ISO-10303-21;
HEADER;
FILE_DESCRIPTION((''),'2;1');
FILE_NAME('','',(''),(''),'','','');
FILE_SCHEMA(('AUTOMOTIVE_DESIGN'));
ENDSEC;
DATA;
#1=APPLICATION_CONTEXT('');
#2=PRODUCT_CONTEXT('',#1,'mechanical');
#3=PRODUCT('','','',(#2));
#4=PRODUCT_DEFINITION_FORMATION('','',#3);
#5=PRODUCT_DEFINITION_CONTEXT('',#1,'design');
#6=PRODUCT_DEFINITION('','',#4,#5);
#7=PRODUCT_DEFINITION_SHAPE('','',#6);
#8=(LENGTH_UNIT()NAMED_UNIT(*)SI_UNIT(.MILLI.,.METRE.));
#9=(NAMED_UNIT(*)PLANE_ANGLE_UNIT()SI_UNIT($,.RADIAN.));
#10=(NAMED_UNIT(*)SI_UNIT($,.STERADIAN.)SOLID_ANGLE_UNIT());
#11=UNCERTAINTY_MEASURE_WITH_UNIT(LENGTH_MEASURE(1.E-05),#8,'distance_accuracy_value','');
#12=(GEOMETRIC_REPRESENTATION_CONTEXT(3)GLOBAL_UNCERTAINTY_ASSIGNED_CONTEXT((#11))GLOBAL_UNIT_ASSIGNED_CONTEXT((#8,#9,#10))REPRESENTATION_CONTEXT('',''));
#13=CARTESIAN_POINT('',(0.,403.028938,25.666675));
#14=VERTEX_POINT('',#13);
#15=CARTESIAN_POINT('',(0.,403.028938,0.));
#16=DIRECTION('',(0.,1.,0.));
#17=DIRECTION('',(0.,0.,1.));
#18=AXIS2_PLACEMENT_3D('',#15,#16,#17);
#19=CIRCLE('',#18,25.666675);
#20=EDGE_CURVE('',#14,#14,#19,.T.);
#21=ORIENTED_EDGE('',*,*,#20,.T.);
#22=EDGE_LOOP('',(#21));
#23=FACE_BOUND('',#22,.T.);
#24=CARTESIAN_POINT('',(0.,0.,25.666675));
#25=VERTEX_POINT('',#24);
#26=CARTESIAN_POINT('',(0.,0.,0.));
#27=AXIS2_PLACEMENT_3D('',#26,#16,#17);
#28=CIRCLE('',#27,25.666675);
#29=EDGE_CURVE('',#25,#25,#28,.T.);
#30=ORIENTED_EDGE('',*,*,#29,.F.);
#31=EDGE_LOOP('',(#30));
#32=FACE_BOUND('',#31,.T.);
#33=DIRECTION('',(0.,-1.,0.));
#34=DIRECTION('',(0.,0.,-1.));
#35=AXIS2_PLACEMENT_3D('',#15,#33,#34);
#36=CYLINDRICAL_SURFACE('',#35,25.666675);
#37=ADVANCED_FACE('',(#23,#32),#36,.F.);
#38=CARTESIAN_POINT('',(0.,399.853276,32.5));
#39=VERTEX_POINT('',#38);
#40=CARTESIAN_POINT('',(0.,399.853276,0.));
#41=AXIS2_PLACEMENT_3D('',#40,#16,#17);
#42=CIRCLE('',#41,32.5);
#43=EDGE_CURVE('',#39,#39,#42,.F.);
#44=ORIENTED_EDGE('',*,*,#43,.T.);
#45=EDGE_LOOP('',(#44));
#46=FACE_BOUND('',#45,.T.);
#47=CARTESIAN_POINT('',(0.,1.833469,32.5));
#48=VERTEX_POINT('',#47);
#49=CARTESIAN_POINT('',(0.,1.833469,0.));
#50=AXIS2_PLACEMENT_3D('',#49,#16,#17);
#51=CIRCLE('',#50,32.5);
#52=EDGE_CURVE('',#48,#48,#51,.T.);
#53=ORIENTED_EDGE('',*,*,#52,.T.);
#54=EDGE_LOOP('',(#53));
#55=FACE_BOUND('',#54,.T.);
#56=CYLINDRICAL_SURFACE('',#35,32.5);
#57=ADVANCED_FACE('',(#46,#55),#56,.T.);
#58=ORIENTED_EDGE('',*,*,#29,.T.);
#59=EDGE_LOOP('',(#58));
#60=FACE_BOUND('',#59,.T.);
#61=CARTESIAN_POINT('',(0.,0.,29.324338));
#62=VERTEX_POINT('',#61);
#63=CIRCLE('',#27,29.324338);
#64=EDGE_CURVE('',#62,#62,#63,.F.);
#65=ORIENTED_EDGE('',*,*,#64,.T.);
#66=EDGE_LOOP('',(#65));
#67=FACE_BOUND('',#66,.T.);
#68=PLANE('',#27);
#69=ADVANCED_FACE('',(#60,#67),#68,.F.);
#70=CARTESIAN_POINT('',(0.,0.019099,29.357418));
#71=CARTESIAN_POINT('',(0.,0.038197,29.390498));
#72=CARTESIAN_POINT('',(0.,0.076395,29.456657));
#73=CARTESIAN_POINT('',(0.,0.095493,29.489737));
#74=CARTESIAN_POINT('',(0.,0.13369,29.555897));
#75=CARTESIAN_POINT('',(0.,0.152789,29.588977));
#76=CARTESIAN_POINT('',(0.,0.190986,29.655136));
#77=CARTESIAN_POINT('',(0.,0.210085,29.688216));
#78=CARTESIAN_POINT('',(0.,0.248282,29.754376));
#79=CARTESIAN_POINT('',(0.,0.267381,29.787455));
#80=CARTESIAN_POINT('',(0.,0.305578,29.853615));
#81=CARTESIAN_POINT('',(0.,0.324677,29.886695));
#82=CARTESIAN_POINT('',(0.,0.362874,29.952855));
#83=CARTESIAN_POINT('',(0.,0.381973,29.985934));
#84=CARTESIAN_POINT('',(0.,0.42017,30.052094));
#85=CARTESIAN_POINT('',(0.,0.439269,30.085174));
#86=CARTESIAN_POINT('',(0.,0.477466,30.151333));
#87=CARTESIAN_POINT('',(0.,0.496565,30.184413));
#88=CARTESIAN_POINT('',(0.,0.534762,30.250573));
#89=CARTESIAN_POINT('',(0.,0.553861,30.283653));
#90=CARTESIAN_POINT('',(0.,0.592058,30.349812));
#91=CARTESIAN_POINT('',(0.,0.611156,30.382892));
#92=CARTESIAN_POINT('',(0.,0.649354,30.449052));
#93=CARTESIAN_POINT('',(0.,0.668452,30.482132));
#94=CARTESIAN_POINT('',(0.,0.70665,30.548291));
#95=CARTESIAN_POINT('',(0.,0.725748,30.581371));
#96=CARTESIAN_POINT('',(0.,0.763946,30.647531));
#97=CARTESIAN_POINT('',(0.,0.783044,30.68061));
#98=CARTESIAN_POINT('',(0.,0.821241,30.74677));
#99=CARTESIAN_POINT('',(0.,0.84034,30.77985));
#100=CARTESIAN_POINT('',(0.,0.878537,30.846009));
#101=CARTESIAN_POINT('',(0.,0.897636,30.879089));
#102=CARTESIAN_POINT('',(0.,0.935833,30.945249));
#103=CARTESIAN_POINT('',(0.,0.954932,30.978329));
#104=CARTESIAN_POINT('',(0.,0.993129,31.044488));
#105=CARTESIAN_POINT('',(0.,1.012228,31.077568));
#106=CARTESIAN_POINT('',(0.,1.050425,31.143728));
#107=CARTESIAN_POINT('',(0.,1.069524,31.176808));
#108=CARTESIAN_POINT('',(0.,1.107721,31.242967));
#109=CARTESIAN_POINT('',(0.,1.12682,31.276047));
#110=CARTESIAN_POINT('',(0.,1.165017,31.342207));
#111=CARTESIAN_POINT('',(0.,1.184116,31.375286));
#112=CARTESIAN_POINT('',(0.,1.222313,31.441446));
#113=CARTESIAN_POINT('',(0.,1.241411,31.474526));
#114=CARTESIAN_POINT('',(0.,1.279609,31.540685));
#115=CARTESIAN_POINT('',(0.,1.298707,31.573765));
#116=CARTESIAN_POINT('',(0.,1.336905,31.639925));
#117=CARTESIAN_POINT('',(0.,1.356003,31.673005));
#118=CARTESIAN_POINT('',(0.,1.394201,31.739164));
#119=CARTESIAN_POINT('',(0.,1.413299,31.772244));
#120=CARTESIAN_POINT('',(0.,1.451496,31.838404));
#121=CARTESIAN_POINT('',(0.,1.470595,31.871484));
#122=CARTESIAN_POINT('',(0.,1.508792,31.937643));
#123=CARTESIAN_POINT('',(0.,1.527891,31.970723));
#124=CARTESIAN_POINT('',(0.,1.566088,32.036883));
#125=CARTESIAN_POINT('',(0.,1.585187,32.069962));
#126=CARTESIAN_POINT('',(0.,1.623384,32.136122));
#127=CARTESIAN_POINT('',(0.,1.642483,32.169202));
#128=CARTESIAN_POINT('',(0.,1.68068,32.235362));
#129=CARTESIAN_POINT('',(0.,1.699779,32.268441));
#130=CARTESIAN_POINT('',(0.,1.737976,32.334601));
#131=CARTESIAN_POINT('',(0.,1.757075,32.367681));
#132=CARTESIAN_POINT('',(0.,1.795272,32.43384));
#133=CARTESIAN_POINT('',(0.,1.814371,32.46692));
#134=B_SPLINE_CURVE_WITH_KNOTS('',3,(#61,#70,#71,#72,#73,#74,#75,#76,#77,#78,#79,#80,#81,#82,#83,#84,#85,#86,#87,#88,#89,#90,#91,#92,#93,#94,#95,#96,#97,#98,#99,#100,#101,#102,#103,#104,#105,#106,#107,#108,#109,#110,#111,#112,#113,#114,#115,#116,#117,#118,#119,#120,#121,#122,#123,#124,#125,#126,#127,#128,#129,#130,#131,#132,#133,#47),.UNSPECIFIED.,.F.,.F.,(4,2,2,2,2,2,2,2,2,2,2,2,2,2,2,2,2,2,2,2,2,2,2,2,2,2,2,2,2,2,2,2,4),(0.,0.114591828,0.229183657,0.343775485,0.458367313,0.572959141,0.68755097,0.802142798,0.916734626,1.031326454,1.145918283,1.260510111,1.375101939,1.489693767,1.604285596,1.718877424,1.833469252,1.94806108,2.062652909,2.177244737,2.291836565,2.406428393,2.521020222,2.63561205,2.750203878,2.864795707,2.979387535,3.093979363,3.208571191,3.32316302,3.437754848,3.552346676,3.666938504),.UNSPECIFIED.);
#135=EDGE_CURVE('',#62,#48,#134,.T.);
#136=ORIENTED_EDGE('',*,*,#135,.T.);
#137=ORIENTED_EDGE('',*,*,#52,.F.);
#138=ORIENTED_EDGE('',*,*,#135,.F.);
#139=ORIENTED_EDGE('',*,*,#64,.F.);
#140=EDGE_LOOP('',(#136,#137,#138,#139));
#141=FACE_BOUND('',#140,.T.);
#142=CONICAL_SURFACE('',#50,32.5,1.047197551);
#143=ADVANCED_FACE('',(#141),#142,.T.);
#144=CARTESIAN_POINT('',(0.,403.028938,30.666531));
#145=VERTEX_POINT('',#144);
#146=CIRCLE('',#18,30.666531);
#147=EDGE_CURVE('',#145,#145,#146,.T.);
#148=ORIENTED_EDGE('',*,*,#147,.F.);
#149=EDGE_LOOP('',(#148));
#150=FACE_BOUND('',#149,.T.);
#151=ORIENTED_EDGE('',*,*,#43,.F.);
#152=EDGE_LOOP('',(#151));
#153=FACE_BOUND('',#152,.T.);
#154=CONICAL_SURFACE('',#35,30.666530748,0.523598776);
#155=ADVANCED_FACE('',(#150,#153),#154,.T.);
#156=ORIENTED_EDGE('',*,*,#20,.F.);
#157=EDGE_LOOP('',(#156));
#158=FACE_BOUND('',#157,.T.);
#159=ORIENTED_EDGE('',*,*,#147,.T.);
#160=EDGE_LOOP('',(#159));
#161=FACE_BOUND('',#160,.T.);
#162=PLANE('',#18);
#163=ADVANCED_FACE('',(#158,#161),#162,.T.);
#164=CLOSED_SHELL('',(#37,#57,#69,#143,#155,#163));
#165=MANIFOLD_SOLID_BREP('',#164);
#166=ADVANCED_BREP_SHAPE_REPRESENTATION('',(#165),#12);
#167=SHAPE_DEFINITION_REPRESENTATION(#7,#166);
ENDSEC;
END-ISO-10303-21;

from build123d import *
from OCP.BRepFilletAPI import BRepFilletAPI_MakeChamfer

# Parameters (mm, degrees)
SKETCH1_R           = 32.5
BOSS_EXTRUDE1_DEPTH = 403.0289379
SKETCH2_R           = 25.666674585
CUT_EXTRUDE1_DEPTH  = 406.641251335
CHAMFER1_SIZE       = 3.175661899
CHAMFER1_SIZE2      = 1.833469252


with BuildPart() as part:
    # Sketch1 → Boss-Extrude1 (new body)
    with BuildSketch(Plane(origin=(0, 0, 0), x_dir=(1, 0, 0), z_dir=(0, 1, 0))):
        Circle(SKETCH1_R)
    extrude(amount=BOSS_EXTRUDE1_DEPTH)

    # Sketch2 → Cut-Extrude1 (cut, through all)
    with BuildSketch(Plane(origin=(0, 0, 0), x_dir=(1, 0, 0), z_dir=(0, 1, 0))):
        Circle(SKETCH2_R)
    extrude(amount=CUT_EXTRUDE1_DEPTH, mode=Mode.SUBTRACT)

    # Chamfer1: one chamfer whose edges measure the first distance from different faces: ONE call of the kernel's chamfer builder (chamfer() names one face for all edges)
    chamfer1_edges_1 = [part.edges().sort_by_distance(p)[0] for p in [
        (-32.5, 403.0289379, 0),
    ]]
    chamfer1_side_1 = [part.faces().sort_by_distance(p)[0] for p in [
        (-32.5, 201.51446895, 0),
    ]]
    chamfer1_edges_2 = [part.edges().sort_by_distance(p)[0] for p in [
        (-32.5, 0, 0),
    ]]
    chamfer1_side_2 = [part.faces().sort_by_distance(p)[0] for p in [
        (-31.580761184, 0, 0),
    ]]
    chamfer1 = BRepFilletAPI_MakeChamfer(part.part.solid().wrapped)
    for e in chamfer1_edges_1:
        chamfer1.Add(CHAMFER1_SIZE, CHAMFER1_SIZE2, e.wrapped, chamfer1_side_1[0].wrapped)  # the first distance lies on this face
    for e in chamfer1_edges_2:
        chamfer1.Add(CHAMFER1_SIZE, CHAMFER1_SIZE2, e.wrapped, chamfer1_side_2[0].wrapped)  # the first distance lies on this face
    add(Compound.cast(chamfer1.Shape()), mode=Mode.REPLACE)


solid = part.part
